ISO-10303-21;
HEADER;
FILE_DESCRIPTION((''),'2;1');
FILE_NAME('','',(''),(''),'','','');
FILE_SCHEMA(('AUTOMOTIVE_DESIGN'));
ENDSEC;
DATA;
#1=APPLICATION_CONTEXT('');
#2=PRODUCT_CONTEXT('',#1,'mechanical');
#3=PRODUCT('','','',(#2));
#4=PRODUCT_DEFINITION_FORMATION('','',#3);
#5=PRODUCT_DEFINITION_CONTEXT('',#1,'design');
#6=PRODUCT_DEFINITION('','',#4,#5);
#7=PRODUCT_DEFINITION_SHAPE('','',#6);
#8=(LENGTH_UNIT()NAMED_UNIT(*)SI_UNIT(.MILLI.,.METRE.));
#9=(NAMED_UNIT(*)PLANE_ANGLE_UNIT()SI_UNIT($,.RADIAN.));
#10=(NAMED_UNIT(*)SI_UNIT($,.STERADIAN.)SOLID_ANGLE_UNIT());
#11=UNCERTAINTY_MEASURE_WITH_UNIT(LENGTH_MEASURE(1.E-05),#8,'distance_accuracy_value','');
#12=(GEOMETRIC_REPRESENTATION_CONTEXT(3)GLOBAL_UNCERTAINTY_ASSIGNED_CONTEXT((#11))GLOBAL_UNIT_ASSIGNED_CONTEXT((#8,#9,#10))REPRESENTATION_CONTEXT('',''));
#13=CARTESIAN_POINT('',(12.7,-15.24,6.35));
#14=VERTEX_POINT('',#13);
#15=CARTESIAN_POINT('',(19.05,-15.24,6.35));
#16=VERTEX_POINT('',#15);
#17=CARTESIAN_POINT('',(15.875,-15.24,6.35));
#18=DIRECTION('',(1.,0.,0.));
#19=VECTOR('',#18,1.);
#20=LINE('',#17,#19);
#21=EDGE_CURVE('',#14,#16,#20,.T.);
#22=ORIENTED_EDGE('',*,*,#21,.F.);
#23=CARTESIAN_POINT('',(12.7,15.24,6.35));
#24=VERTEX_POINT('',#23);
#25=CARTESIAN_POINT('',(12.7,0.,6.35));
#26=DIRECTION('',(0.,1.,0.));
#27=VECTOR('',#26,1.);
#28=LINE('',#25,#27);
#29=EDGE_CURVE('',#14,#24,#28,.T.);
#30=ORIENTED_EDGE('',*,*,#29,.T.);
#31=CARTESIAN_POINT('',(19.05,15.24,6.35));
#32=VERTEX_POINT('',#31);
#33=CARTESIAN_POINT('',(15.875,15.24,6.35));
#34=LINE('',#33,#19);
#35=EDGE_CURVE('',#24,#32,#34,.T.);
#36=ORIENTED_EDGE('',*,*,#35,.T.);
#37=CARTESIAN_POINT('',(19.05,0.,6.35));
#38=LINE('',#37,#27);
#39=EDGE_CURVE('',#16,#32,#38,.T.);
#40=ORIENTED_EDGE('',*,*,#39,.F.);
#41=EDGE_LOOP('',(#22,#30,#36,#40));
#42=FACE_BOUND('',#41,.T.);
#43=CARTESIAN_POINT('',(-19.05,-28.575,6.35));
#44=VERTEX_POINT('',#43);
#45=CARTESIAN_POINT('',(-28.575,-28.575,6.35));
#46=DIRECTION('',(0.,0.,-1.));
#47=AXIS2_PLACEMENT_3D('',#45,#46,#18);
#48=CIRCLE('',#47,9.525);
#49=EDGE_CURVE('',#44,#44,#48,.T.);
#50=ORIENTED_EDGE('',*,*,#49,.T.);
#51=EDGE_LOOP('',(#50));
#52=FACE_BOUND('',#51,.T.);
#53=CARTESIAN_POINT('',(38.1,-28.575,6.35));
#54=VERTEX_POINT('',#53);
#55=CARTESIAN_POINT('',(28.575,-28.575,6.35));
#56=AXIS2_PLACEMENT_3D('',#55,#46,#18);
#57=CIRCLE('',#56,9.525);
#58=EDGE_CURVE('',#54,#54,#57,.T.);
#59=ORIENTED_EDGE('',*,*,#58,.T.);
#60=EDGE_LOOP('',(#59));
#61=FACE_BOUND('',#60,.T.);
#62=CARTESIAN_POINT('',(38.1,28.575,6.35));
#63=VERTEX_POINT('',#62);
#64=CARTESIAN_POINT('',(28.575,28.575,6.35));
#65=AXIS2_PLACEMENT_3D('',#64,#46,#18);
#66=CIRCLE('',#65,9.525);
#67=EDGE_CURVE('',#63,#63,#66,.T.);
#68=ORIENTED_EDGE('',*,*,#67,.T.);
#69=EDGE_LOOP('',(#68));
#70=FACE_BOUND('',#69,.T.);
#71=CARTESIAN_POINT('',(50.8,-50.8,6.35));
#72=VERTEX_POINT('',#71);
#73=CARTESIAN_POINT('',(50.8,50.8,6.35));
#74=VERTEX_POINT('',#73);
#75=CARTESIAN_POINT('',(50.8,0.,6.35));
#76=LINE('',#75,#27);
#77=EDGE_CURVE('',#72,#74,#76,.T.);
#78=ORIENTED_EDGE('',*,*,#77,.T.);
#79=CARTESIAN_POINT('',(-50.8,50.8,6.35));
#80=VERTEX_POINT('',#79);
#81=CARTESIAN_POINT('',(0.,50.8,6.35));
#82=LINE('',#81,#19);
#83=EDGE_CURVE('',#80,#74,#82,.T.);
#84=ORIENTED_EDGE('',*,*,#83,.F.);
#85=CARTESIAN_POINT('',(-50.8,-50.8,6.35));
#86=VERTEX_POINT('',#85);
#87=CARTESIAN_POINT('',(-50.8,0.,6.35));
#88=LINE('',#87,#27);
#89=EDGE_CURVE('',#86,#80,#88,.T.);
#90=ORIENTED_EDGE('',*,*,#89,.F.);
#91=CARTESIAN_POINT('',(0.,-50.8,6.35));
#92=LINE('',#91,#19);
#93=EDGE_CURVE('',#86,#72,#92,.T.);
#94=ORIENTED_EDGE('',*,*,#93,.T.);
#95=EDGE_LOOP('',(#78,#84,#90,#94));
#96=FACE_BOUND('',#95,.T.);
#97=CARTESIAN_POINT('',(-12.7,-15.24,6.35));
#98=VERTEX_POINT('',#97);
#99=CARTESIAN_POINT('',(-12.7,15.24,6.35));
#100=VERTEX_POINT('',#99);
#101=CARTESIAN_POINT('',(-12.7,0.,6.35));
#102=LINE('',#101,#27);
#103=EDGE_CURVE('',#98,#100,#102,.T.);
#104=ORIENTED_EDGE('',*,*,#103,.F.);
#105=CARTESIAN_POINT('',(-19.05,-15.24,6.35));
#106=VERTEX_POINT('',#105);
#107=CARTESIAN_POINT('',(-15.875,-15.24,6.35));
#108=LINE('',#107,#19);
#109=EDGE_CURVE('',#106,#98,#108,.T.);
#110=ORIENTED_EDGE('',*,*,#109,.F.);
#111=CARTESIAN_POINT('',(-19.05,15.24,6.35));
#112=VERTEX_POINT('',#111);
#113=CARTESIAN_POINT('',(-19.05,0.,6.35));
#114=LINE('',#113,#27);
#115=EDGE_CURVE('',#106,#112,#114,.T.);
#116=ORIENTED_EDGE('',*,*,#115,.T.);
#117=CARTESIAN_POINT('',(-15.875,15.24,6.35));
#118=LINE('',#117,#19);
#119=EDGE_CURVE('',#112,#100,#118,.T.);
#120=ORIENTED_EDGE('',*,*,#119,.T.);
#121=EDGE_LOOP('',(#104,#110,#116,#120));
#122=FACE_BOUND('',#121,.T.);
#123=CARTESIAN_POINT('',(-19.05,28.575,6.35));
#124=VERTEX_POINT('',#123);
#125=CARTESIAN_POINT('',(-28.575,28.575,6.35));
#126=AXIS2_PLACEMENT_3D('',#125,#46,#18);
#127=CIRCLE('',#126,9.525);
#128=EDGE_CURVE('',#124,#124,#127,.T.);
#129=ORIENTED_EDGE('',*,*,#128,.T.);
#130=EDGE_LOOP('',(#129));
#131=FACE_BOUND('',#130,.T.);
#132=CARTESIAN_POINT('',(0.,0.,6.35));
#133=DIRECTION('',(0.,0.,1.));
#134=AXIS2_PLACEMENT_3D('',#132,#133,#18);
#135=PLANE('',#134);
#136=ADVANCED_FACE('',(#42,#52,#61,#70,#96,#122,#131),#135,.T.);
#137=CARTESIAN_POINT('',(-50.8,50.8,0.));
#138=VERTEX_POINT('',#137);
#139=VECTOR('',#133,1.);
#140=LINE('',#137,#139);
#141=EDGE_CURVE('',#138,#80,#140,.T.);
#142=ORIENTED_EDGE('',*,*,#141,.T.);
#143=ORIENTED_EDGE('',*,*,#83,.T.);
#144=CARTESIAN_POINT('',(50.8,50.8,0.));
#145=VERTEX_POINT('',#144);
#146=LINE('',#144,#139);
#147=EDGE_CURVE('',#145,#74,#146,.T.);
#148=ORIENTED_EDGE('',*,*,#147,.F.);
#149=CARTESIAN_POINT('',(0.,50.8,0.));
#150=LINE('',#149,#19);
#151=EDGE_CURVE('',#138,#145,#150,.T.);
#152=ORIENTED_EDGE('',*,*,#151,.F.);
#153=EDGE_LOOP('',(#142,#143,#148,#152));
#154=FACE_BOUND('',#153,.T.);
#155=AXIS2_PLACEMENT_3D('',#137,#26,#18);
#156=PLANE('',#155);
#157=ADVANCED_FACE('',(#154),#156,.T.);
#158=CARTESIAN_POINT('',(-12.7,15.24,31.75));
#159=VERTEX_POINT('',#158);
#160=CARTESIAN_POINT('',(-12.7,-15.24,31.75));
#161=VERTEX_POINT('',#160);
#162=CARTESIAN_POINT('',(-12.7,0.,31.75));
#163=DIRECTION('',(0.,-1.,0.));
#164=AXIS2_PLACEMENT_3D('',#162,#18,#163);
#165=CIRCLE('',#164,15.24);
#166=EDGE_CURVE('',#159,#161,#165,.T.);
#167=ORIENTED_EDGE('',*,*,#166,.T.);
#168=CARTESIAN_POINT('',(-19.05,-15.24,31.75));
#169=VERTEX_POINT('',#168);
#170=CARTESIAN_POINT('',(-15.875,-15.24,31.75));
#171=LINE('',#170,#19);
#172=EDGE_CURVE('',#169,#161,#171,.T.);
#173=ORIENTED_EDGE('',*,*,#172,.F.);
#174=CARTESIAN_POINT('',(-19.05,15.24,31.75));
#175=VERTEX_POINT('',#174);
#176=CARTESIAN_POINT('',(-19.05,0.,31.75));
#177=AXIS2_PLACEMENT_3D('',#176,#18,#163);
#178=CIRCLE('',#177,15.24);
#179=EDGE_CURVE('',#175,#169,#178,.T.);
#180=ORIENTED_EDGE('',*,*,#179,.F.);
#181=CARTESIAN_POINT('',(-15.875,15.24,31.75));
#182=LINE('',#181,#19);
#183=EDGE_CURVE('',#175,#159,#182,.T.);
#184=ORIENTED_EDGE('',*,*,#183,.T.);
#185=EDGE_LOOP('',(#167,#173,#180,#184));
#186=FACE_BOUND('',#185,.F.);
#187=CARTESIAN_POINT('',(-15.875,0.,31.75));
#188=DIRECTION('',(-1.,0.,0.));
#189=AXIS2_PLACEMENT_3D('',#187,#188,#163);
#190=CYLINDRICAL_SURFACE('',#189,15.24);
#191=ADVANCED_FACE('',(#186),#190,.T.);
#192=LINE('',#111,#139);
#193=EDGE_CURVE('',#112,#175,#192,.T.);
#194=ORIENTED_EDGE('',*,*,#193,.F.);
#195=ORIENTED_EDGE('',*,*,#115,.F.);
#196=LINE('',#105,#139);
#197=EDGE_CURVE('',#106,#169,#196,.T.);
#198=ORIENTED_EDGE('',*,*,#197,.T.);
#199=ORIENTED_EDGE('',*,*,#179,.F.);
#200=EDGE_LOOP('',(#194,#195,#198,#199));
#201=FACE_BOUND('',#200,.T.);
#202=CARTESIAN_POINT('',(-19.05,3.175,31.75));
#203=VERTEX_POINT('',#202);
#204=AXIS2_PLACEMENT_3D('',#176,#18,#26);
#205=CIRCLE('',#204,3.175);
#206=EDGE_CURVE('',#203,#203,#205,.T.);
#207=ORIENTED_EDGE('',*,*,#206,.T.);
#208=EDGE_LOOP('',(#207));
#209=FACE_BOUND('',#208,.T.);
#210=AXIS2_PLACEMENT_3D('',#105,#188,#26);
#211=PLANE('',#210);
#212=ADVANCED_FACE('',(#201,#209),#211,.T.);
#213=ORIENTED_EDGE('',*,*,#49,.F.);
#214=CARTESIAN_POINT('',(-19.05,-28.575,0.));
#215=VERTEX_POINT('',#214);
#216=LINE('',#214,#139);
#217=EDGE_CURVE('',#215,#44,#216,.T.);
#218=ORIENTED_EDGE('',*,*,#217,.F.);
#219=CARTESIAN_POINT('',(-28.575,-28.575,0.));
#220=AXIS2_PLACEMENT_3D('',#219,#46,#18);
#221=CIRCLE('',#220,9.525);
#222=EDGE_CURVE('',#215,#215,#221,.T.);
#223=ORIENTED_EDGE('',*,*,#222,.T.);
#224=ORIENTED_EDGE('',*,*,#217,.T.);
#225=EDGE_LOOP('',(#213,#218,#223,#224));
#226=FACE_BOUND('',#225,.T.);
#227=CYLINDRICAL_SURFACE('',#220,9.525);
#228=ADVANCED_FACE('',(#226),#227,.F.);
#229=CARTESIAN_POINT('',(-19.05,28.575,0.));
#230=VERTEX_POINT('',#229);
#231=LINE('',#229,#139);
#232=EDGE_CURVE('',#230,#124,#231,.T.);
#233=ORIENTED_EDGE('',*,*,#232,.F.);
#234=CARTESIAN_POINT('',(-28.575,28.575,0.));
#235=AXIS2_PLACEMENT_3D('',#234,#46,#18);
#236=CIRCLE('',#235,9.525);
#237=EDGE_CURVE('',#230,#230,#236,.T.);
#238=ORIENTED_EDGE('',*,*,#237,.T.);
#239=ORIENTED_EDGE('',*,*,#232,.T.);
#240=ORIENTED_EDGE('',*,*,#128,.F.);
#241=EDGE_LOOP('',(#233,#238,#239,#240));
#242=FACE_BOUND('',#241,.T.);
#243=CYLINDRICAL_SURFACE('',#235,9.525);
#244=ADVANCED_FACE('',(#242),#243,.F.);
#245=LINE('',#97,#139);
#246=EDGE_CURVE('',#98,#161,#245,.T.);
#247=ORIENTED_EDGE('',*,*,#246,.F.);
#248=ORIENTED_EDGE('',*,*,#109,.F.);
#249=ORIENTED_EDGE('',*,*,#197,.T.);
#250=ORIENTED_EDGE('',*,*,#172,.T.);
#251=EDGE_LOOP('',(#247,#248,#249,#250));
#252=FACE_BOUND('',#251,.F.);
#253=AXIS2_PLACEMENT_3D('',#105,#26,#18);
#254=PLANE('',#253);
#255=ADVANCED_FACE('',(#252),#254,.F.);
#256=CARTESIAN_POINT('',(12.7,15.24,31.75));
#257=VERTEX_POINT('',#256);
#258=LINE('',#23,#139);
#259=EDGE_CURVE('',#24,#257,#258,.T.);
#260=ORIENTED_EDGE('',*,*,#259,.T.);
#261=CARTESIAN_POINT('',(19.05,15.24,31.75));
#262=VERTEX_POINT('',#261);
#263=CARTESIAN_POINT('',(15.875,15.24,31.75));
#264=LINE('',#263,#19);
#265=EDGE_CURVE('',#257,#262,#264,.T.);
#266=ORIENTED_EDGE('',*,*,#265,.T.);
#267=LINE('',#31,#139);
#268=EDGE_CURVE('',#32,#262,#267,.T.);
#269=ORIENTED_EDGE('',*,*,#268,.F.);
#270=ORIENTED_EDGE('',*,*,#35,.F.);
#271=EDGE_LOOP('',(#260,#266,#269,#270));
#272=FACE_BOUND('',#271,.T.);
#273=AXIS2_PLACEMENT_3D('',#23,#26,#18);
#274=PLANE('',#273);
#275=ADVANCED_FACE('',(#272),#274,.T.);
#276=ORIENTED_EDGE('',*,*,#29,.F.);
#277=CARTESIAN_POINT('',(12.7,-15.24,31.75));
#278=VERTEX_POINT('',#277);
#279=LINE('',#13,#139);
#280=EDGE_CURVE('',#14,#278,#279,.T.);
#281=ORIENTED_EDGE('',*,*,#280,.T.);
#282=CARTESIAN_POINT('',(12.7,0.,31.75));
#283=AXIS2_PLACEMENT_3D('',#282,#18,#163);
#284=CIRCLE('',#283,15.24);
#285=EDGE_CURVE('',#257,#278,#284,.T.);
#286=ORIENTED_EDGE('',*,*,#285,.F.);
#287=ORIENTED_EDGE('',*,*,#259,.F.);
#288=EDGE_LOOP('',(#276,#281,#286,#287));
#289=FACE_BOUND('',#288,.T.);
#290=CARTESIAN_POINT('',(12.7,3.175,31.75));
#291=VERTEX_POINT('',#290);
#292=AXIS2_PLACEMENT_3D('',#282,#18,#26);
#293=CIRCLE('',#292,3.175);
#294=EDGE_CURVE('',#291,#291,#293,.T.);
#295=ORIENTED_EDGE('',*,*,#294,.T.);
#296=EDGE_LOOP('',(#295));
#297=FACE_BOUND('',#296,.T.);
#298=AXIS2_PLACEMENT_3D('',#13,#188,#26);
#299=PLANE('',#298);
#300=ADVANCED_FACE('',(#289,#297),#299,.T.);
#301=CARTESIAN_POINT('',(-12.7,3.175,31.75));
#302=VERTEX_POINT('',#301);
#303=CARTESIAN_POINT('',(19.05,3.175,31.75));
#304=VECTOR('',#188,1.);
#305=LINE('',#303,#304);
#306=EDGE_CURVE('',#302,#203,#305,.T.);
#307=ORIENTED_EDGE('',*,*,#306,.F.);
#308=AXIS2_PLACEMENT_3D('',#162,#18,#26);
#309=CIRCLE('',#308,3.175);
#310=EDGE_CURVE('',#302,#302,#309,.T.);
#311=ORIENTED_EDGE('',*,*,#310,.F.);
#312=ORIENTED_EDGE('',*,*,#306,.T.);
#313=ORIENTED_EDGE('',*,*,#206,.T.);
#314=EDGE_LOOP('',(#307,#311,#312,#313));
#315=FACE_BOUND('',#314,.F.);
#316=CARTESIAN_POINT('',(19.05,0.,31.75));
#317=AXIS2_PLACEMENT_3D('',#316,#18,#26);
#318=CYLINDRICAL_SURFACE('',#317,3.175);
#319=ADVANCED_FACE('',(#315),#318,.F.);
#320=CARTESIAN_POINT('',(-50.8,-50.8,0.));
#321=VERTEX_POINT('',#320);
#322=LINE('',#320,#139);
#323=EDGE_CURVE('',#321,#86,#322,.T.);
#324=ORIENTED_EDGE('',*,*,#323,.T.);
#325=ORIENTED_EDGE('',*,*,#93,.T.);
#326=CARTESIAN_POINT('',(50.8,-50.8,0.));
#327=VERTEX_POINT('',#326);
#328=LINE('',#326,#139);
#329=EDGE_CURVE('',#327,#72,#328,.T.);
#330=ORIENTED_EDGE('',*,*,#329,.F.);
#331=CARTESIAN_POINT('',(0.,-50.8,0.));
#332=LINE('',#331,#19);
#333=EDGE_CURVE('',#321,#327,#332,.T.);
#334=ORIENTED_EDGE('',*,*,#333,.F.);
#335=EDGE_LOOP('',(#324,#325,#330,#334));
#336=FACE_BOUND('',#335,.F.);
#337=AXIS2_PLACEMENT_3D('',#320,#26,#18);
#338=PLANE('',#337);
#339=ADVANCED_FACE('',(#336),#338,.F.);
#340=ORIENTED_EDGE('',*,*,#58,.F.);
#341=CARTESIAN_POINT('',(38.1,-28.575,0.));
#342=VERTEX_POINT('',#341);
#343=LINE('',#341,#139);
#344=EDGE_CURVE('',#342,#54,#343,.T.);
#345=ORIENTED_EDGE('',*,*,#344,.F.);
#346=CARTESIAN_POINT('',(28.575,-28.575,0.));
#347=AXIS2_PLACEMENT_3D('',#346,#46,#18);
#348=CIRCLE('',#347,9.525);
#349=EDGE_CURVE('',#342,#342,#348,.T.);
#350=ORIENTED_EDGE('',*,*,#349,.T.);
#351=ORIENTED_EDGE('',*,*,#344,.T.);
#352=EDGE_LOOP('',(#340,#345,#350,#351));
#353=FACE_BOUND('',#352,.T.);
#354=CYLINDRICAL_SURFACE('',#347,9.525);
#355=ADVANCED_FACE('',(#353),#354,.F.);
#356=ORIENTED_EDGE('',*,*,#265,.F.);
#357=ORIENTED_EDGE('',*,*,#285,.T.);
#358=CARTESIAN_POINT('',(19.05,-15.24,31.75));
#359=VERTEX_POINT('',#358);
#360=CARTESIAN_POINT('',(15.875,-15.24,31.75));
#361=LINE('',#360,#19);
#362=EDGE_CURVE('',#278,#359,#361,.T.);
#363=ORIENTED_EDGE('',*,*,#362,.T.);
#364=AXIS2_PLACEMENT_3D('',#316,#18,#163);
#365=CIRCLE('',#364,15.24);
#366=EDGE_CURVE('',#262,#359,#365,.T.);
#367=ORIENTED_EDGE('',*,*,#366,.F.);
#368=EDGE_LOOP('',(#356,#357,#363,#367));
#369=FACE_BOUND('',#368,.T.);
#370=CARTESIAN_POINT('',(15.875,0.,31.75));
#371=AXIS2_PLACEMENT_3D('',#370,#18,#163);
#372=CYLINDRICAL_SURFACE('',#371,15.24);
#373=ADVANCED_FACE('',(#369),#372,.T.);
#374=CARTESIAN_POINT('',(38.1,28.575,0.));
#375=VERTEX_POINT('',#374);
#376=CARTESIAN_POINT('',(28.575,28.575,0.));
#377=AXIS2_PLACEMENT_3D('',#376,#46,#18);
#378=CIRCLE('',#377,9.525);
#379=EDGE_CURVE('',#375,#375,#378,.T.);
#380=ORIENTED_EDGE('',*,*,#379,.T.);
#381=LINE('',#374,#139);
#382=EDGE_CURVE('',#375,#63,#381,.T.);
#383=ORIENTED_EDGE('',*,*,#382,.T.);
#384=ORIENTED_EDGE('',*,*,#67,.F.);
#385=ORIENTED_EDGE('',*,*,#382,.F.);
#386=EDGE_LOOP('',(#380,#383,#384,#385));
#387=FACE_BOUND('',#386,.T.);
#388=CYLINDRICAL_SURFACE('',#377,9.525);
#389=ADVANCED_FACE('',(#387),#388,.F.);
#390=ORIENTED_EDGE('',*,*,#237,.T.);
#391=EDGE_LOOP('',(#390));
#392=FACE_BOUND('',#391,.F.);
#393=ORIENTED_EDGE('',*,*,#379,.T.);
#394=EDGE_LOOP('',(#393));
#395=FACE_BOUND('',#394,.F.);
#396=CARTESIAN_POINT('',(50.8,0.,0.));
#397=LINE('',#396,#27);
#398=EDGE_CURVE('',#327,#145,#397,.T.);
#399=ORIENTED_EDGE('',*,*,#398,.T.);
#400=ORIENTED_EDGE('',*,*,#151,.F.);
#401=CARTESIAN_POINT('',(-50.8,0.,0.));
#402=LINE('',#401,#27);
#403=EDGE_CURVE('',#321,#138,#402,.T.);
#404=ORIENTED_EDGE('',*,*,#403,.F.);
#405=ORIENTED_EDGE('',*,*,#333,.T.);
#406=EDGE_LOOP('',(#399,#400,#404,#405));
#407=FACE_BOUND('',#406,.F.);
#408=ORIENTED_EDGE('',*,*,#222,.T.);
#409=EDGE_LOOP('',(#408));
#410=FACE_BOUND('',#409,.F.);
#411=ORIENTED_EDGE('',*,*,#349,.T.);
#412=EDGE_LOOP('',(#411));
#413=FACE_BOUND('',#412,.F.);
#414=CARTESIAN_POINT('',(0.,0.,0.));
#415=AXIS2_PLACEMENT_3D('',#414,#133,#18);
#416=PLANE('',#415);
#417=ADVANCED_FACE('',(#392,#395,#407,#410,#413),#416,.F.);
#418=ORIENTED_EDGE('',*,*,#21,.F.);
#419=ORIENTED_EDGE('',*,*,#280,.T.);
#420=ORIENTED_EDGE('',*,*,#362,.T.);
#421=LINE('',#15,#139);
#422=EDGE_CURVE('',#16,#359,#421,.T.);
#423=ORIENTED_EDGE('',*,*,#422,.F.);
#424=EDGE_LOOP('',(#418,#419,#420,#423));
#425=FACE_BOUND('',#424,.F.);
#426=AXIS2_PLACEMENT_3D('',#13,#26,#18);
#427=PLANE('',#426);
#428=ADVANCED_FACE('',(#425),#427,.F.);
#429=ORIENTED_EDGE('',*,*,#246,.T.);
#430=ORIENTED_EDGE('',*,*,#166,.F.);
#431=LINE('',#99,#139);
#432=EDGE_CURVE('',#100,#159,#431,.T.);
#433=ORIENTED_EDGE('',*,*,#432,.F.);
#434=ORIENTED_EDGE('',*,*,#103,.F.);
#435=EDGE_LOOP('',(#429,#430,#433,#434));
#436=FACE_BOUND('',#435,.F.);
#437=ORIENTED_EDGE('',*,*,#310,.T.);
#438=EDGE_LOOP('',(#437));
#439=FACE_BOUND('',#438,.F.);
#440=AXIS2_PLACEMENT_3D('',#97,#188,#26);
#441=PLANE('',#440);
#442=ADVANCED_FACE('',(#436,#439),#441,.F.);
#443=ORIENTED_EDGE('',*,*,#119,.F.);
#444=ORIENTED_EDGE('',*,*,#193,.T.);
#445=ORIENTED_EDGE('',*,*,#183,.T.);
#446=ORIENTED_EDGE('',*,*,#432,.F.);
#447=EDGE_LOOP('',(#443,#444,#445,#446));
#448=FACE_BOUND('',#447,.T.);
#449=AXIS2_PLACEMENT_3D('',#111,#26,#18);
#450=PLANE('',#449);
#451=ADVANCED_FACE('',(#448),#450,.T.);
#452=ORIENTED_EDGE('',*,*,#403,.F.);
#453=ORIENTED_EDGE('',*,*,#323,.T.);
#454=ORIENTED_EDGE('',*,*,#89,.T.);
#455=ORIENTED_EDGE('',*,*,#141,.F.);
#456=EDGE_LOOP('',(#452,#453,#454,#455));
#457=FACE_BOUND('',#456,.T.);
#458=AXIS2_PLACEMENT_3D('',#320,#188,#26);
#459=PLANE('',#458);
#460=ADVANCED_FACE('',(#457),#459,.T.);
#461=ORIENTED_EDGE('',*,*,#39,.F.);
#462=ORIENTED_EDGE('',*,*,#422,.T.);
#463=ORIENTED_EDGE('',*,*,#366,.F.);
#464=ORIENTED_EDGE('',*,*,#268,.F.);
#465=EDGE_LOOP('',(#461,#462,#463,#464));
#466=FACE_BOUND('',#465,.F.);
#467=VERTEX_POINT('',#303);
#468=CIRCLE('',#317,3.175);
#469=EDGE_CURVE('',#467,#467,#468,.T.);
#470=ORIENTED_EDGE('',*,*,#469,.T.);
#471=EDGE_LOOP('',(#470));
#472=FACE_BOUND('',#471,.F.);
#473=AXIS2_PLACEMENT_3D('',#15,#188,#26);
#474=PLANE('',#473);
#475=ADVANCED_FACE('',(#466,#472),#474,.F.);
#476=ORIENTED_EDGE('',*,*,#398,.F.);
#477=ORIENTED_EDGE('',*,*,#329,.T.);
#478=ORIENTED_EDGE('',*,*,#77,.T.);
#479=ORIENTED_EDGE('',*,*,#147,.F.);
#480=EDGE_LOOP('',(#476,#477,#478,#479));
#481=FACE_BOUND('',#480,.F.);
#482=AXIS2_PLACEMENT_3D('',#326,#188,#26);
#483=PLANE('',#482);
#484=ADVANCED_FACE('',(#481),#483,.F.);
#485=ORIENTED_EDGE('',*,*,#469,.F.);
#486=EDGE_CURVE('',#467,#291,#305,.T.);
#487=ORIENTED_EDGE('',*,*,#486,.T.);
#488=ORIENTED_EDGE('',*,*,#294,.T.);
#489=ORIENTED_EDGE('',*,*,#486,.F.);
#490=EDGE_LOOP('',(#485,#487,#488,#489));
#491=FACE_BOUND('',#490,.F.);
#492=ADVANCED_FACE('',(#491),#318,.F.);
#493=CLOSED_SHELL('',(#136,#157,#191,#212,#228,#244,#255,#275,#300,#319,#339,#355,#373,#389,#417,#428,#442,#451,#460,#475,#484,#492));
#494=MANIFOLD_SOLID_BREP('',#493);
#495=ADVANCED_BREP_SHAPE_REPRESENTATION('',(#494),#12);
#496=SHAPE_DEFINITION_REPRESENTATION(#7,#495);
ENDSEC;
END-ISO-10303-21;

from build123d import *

# Parameters (mm, degrees)
F0_W     = 101.6
F0_H     = 101.6
F0_R     = 9.525
F1_DEPTH = 6.35
F2_W     = 6.35
F2_H     = 30.48
F3_DEPTH = 25.4
F4_W     = 6.35
F4_H     = 15.24
F7_R     = 3.175
F8_DEPTH = 44.45


with BuildPart() as f1:
    # F0 (on Top) → F1 (new body)
    with BuildSketch(Plane.XY):
        Rectangle(F0_W, F0_H)
        with Locations((-28.575, -28.575)):
            Circle(F0_R, mode=Mode.SUBTRACT)
        with Locations((28.575, -28.575)):
            Circle(F0_R, mode=Mode.SUBTRACT)
        with Locations((-28.575, 28.575)):
            Circle(F0_R, mode=Mode.SUBTRACT)
        with Locations((28.575, 28.575)):
            Circle(F0_R, mode=Mode.SUBTRACT)
    extrude(amount=F1_DEPTH)

    # F2 (on face) → F3 (join)
    with BuildSketch(Plane.XY.offset(6.35)):
        with Locations((15.875, 0)):
            Rectangle(F2_W, F2_H)
        with Locations((-15.875, 0)):
            Rectangle(F2_W, F2_H)
    extrude(amount=F3_DEPTH)

    # F4 (on face) → F5 (revolve)
    with BuildSketch(Plane.XY.offset(31.75)):
        with Locations((15.875, -7.62)):
            Rectangle(F4_W, F4_H)
    revolve(axis=Axis((15.875, 0, 31.75), (1, 0, 0)))

    # F6: F1 across plane


with BuildPart() as f1_1:
    add(f1.part)
    add(f1.part.mirror(Plane.YZ))

    # F7 (on face) → F8 (cut)
    with BuildSketch(Plane.YZ.offset(19.05)):
        with Locations((0, 31.75)):
            Circle(F7_R)
    extrude(amount=-F8_DEPTH, mode=Mode.SUBTRACT)


solid = f1_1.part
